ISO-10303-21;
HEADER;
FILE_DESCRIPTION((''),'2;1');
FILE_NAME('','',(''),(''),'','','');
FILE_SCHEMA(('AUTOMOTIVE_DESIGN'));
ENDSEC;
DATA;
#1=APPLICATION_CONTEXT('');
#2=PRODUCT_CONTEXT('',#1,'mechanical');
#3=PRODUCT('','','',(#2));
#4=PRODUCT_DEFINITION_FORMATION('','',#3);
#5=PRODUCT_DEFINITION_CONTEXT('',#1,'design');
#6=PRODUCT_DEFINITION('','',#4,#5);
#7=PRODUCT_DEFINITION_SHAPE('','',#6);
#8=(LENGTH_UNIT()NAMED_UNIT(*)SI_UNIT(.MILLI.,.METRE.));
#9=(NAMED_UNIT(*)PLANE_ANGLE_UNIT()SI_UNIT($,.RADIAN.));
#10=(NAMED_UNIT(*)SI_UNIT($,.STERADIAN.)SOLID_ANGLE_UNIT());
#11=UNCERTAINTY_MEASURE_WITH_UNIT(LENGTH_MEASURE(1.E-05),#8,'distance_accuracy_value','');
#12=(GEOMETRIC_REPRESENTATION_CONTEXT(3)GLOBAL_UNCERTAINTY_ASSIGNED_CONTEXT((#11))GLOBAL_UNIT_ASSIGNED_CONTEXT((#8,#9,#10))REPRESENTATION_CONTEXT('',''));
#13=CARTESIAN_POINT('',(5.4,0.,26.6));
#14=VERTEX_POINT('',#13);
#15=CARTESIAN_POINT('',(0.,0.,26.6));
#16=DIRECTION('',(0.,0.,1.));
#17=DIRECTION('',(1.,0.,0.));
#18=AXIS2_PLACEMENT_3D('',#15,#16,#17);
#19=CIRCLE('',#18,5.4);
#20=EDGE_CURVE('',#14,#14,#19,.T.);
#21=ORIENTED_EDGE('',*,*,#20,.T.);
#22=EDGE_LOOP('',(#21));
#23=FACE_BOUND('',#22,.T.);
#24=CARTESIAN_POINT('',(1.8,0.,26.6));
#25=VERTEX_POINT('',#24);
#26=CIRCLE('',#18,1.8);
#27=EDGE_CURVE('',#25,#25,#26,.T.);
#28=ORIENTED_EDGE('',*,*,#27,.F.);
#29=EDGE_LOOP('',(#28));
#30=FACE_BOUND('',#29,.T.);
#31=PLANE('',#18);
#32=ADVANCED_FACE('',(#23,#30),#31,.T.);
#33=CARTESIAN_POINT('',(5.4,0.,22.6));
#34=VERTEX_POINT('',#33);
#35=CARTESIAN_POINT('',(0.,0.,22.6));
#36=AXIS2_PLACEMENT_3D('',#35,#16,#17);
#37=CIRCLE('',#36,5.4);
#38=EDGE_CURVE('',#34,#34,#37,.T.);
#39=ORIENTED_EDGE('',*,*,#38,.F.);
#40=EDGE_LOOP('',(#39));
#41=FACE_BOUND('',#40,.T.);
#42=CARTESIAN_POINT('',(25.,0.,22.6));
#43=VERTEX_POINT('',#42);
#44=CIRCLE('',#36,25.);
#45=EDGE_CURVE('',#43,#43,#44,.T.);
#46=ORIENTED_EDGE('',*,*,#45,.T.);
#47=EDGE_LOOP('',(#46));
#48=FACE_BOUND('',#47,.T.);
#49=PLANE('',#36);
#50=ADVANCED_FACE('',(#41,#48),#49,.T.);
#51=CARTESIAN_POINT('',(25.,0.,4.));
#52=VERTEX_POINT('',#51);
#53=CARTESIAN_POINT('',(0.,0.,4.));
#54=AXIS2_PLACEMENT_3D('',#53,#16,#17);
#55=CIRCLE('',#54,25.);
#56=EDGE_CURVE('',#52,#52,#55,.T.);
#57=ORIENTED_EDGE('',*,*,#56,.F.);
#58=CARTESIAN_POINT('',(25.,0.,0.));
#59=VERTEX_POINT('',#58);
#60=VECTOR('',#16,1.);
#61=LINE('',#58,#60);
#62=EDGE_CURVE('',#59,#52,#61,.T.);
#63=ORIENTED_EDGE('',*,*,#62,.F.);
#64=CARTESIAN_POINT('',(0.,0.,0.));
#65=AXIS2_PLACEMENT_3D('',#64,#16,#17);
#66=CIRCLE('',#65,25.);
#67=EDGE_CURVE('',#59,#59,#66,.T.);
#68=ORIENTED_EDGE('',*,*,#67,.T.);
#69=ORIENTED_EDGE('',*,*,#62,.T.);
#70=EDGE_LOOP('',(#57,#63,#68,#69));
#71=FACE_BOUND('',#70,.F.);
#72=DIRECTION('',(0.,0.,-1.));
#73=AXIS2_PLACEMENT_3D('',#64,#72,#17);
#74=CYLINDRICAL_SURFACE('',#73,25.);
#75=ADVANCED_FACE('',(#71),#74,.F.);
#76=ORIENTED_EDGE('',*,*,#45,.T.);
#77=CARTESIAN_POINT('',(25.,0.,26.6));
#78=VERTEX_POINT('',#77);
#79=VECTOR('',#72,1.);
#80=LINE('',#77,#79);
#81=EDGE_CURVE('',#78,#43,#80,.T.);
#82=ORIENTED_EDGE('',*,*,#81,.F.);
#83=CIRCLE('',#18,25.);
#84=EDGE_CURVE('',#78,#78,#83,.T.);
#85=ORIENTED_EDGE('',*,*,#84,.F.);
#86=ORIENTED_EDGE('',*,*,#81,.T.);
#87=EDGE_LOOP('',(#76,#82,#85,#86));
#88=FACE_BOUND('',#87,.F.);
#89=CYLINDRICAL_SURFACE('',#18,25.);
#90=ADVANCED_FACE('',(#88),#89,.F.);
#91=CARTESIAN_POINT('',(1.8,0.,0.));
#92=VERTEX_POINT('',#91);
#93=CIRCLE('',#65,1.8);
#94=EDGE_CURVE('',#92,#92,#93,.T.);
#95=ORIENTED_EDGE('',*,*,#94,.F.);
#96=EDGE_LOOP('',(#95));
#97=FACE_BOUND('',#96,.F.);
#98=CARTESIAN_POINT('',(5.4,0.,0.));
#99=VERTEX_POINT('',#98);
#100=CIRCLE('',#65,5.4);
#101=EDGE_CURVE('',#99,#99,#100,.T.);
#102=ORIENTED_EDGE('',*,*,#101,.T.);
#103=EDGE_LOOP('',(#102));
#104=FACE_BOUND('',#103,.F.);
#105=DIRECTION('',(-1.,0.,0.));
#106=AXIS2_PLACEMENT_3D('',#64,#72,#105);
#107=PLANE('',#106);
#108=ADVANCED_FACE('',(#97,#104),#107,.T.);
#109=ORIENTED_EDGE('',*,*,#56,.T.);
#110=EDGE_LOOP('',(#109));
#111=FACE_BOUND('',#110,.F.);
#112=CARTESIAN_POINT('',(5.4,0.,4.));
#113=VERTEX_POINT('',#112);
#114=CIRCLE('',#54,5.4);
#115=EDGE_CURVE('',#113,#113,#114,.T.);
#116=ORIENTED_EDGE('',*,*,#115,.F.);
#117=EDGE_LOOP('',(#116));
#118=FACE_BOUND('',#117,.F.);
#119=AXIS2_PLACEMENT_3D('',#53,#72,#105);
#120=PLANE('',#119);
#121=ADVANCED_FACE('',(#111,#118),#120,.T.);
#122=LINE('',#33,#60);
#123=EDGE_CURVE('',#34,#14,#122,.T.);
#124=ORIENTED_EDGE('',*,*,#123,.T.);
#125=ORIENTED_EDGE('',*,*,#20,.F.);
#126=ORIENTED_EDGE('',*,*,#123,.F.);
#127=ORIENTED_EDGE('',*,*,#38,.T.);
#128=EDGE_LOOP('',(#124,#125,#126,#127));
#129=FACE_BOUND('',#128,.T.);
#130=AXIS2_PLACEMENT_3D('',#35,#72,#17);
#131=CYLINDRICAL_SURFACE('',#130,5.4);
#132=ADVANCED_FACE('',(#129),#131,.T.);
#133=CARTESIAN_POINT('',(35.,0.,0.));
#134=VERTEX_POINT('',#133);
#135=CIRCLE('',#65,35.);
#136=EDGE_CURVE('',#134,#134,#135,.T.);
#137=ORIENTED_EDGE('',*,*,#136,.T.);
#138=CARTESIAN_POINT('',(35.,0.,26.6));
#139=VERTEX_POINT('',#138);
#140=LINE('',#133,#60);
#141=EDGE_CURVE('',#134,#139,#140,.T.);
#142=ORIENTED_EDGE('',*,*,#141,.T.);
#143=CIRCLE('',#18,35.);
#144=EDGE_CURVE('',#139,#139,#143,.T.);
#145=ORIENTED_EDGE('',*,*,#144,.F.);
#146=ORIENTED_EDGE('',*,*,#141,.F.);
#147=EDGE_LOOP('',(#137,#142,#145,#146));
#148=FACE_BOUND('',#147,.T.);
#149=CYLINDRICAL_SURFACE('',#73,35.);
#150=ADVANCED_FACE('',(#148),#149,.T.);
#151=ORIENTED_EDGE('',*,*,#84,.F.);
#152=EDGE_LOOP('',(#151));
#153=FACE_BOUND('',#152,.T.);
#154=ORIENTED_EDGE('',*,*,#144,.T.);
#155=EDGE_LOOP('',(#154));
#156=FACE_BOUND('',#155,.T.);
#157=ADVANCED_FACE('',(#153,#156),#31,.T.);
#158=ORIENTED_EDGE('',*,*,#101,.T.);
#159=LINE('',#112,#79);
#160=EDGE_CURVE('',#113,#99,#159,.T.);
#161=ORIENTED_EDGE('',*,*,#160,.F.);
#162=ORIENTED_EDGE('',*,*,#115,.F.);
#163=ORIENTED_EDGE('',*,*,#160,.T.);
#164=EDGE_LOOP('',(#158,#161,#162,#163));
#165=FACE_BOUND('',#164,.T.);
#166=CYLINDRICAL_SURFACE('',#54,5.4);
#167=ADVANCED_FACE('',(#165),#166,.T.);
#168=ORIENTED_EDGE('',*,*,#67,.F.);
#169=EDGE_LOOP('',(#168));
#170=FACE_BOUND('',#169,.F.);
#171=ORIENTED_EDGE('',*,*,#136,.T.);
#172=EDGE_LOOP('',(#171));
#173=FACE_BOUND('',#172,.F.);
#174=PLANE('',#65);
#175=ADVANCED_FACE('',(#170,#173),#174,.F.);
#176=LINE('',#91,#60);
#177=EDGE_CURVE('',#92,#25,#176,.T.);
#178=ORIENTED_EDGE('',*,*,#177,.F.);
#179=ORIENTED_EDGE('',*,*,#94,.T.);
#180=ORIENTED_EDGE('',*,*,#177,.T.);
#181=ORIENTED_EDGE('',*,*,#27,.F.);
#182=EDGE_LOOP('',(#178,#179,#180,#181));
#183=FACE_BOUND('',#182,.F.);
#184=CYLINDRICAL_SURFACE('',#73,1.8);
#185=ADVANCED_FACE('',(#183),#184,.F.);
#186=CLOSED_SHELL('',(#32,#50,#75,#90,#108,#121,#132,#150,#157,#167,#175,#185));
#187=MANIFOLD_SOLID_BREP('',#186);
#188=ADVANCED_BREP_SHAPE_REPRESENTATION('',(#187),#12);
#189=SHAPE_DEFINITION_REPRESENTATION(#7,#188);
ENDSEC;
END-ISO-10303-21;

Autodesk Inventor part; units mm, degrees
ref_plane "YZ Plane" through (0, 0, 0) normal (1, 0, 0) x (0, 1, 0)
ref_plane "XZ Plane" through (0, 0, 0) normal (0, 1, 0) x (-1, 0, 0)
sketch "Esboço2" plane through (0, 0, 0) normal (0, 0, 1) x (1, 0, 0)
  circle A0 centre (0, 0) radius 35
  dimension "d5" = 70
extrude "Extrusão2" add sketch "Esboço2" along normal blind 26.6
sketch "Esboço9" plane through (0, 0, 26.6) normal (0, 0, 1) x (1, 0, 0)
  circle A0 centre (0, 0) radius 25
  dimension "d18" = 50
extrude "Extrusão5" cut sketch "Esboço9" against normal blind 4
sketch "Esboço12" plane through (0, 0, 22.6) normal (0, 0, 1) x (1, 0, 0)
  circle A0 centre (0, 0) radius 5.4
  dimension "d24" = 10.8
extrude "Extrusão7" add sketch "Esboço12" along normal blind 4
sketch "Esboço13" plane through (0, 0, 26.6) normal (0, 0, 1) x (1, 0, 0)
  circle A0 centre (0, 0) radius 1.8
  dimension "d27" = 3.6
extrude "Extrusão8" cut sketch "Esboço13" against normal through all
ref_plane "Plano de trabalho1" through (0, 0, 13.3) normal (0, 0, 1) x (1, 0, 0)
mirror "Espelhamento2" about plane through (0, 0, 13.3) normal (0, 0, 1) of "Extrusão8", "Extrusão7", "Extrusão5"
properties part number "roda"
